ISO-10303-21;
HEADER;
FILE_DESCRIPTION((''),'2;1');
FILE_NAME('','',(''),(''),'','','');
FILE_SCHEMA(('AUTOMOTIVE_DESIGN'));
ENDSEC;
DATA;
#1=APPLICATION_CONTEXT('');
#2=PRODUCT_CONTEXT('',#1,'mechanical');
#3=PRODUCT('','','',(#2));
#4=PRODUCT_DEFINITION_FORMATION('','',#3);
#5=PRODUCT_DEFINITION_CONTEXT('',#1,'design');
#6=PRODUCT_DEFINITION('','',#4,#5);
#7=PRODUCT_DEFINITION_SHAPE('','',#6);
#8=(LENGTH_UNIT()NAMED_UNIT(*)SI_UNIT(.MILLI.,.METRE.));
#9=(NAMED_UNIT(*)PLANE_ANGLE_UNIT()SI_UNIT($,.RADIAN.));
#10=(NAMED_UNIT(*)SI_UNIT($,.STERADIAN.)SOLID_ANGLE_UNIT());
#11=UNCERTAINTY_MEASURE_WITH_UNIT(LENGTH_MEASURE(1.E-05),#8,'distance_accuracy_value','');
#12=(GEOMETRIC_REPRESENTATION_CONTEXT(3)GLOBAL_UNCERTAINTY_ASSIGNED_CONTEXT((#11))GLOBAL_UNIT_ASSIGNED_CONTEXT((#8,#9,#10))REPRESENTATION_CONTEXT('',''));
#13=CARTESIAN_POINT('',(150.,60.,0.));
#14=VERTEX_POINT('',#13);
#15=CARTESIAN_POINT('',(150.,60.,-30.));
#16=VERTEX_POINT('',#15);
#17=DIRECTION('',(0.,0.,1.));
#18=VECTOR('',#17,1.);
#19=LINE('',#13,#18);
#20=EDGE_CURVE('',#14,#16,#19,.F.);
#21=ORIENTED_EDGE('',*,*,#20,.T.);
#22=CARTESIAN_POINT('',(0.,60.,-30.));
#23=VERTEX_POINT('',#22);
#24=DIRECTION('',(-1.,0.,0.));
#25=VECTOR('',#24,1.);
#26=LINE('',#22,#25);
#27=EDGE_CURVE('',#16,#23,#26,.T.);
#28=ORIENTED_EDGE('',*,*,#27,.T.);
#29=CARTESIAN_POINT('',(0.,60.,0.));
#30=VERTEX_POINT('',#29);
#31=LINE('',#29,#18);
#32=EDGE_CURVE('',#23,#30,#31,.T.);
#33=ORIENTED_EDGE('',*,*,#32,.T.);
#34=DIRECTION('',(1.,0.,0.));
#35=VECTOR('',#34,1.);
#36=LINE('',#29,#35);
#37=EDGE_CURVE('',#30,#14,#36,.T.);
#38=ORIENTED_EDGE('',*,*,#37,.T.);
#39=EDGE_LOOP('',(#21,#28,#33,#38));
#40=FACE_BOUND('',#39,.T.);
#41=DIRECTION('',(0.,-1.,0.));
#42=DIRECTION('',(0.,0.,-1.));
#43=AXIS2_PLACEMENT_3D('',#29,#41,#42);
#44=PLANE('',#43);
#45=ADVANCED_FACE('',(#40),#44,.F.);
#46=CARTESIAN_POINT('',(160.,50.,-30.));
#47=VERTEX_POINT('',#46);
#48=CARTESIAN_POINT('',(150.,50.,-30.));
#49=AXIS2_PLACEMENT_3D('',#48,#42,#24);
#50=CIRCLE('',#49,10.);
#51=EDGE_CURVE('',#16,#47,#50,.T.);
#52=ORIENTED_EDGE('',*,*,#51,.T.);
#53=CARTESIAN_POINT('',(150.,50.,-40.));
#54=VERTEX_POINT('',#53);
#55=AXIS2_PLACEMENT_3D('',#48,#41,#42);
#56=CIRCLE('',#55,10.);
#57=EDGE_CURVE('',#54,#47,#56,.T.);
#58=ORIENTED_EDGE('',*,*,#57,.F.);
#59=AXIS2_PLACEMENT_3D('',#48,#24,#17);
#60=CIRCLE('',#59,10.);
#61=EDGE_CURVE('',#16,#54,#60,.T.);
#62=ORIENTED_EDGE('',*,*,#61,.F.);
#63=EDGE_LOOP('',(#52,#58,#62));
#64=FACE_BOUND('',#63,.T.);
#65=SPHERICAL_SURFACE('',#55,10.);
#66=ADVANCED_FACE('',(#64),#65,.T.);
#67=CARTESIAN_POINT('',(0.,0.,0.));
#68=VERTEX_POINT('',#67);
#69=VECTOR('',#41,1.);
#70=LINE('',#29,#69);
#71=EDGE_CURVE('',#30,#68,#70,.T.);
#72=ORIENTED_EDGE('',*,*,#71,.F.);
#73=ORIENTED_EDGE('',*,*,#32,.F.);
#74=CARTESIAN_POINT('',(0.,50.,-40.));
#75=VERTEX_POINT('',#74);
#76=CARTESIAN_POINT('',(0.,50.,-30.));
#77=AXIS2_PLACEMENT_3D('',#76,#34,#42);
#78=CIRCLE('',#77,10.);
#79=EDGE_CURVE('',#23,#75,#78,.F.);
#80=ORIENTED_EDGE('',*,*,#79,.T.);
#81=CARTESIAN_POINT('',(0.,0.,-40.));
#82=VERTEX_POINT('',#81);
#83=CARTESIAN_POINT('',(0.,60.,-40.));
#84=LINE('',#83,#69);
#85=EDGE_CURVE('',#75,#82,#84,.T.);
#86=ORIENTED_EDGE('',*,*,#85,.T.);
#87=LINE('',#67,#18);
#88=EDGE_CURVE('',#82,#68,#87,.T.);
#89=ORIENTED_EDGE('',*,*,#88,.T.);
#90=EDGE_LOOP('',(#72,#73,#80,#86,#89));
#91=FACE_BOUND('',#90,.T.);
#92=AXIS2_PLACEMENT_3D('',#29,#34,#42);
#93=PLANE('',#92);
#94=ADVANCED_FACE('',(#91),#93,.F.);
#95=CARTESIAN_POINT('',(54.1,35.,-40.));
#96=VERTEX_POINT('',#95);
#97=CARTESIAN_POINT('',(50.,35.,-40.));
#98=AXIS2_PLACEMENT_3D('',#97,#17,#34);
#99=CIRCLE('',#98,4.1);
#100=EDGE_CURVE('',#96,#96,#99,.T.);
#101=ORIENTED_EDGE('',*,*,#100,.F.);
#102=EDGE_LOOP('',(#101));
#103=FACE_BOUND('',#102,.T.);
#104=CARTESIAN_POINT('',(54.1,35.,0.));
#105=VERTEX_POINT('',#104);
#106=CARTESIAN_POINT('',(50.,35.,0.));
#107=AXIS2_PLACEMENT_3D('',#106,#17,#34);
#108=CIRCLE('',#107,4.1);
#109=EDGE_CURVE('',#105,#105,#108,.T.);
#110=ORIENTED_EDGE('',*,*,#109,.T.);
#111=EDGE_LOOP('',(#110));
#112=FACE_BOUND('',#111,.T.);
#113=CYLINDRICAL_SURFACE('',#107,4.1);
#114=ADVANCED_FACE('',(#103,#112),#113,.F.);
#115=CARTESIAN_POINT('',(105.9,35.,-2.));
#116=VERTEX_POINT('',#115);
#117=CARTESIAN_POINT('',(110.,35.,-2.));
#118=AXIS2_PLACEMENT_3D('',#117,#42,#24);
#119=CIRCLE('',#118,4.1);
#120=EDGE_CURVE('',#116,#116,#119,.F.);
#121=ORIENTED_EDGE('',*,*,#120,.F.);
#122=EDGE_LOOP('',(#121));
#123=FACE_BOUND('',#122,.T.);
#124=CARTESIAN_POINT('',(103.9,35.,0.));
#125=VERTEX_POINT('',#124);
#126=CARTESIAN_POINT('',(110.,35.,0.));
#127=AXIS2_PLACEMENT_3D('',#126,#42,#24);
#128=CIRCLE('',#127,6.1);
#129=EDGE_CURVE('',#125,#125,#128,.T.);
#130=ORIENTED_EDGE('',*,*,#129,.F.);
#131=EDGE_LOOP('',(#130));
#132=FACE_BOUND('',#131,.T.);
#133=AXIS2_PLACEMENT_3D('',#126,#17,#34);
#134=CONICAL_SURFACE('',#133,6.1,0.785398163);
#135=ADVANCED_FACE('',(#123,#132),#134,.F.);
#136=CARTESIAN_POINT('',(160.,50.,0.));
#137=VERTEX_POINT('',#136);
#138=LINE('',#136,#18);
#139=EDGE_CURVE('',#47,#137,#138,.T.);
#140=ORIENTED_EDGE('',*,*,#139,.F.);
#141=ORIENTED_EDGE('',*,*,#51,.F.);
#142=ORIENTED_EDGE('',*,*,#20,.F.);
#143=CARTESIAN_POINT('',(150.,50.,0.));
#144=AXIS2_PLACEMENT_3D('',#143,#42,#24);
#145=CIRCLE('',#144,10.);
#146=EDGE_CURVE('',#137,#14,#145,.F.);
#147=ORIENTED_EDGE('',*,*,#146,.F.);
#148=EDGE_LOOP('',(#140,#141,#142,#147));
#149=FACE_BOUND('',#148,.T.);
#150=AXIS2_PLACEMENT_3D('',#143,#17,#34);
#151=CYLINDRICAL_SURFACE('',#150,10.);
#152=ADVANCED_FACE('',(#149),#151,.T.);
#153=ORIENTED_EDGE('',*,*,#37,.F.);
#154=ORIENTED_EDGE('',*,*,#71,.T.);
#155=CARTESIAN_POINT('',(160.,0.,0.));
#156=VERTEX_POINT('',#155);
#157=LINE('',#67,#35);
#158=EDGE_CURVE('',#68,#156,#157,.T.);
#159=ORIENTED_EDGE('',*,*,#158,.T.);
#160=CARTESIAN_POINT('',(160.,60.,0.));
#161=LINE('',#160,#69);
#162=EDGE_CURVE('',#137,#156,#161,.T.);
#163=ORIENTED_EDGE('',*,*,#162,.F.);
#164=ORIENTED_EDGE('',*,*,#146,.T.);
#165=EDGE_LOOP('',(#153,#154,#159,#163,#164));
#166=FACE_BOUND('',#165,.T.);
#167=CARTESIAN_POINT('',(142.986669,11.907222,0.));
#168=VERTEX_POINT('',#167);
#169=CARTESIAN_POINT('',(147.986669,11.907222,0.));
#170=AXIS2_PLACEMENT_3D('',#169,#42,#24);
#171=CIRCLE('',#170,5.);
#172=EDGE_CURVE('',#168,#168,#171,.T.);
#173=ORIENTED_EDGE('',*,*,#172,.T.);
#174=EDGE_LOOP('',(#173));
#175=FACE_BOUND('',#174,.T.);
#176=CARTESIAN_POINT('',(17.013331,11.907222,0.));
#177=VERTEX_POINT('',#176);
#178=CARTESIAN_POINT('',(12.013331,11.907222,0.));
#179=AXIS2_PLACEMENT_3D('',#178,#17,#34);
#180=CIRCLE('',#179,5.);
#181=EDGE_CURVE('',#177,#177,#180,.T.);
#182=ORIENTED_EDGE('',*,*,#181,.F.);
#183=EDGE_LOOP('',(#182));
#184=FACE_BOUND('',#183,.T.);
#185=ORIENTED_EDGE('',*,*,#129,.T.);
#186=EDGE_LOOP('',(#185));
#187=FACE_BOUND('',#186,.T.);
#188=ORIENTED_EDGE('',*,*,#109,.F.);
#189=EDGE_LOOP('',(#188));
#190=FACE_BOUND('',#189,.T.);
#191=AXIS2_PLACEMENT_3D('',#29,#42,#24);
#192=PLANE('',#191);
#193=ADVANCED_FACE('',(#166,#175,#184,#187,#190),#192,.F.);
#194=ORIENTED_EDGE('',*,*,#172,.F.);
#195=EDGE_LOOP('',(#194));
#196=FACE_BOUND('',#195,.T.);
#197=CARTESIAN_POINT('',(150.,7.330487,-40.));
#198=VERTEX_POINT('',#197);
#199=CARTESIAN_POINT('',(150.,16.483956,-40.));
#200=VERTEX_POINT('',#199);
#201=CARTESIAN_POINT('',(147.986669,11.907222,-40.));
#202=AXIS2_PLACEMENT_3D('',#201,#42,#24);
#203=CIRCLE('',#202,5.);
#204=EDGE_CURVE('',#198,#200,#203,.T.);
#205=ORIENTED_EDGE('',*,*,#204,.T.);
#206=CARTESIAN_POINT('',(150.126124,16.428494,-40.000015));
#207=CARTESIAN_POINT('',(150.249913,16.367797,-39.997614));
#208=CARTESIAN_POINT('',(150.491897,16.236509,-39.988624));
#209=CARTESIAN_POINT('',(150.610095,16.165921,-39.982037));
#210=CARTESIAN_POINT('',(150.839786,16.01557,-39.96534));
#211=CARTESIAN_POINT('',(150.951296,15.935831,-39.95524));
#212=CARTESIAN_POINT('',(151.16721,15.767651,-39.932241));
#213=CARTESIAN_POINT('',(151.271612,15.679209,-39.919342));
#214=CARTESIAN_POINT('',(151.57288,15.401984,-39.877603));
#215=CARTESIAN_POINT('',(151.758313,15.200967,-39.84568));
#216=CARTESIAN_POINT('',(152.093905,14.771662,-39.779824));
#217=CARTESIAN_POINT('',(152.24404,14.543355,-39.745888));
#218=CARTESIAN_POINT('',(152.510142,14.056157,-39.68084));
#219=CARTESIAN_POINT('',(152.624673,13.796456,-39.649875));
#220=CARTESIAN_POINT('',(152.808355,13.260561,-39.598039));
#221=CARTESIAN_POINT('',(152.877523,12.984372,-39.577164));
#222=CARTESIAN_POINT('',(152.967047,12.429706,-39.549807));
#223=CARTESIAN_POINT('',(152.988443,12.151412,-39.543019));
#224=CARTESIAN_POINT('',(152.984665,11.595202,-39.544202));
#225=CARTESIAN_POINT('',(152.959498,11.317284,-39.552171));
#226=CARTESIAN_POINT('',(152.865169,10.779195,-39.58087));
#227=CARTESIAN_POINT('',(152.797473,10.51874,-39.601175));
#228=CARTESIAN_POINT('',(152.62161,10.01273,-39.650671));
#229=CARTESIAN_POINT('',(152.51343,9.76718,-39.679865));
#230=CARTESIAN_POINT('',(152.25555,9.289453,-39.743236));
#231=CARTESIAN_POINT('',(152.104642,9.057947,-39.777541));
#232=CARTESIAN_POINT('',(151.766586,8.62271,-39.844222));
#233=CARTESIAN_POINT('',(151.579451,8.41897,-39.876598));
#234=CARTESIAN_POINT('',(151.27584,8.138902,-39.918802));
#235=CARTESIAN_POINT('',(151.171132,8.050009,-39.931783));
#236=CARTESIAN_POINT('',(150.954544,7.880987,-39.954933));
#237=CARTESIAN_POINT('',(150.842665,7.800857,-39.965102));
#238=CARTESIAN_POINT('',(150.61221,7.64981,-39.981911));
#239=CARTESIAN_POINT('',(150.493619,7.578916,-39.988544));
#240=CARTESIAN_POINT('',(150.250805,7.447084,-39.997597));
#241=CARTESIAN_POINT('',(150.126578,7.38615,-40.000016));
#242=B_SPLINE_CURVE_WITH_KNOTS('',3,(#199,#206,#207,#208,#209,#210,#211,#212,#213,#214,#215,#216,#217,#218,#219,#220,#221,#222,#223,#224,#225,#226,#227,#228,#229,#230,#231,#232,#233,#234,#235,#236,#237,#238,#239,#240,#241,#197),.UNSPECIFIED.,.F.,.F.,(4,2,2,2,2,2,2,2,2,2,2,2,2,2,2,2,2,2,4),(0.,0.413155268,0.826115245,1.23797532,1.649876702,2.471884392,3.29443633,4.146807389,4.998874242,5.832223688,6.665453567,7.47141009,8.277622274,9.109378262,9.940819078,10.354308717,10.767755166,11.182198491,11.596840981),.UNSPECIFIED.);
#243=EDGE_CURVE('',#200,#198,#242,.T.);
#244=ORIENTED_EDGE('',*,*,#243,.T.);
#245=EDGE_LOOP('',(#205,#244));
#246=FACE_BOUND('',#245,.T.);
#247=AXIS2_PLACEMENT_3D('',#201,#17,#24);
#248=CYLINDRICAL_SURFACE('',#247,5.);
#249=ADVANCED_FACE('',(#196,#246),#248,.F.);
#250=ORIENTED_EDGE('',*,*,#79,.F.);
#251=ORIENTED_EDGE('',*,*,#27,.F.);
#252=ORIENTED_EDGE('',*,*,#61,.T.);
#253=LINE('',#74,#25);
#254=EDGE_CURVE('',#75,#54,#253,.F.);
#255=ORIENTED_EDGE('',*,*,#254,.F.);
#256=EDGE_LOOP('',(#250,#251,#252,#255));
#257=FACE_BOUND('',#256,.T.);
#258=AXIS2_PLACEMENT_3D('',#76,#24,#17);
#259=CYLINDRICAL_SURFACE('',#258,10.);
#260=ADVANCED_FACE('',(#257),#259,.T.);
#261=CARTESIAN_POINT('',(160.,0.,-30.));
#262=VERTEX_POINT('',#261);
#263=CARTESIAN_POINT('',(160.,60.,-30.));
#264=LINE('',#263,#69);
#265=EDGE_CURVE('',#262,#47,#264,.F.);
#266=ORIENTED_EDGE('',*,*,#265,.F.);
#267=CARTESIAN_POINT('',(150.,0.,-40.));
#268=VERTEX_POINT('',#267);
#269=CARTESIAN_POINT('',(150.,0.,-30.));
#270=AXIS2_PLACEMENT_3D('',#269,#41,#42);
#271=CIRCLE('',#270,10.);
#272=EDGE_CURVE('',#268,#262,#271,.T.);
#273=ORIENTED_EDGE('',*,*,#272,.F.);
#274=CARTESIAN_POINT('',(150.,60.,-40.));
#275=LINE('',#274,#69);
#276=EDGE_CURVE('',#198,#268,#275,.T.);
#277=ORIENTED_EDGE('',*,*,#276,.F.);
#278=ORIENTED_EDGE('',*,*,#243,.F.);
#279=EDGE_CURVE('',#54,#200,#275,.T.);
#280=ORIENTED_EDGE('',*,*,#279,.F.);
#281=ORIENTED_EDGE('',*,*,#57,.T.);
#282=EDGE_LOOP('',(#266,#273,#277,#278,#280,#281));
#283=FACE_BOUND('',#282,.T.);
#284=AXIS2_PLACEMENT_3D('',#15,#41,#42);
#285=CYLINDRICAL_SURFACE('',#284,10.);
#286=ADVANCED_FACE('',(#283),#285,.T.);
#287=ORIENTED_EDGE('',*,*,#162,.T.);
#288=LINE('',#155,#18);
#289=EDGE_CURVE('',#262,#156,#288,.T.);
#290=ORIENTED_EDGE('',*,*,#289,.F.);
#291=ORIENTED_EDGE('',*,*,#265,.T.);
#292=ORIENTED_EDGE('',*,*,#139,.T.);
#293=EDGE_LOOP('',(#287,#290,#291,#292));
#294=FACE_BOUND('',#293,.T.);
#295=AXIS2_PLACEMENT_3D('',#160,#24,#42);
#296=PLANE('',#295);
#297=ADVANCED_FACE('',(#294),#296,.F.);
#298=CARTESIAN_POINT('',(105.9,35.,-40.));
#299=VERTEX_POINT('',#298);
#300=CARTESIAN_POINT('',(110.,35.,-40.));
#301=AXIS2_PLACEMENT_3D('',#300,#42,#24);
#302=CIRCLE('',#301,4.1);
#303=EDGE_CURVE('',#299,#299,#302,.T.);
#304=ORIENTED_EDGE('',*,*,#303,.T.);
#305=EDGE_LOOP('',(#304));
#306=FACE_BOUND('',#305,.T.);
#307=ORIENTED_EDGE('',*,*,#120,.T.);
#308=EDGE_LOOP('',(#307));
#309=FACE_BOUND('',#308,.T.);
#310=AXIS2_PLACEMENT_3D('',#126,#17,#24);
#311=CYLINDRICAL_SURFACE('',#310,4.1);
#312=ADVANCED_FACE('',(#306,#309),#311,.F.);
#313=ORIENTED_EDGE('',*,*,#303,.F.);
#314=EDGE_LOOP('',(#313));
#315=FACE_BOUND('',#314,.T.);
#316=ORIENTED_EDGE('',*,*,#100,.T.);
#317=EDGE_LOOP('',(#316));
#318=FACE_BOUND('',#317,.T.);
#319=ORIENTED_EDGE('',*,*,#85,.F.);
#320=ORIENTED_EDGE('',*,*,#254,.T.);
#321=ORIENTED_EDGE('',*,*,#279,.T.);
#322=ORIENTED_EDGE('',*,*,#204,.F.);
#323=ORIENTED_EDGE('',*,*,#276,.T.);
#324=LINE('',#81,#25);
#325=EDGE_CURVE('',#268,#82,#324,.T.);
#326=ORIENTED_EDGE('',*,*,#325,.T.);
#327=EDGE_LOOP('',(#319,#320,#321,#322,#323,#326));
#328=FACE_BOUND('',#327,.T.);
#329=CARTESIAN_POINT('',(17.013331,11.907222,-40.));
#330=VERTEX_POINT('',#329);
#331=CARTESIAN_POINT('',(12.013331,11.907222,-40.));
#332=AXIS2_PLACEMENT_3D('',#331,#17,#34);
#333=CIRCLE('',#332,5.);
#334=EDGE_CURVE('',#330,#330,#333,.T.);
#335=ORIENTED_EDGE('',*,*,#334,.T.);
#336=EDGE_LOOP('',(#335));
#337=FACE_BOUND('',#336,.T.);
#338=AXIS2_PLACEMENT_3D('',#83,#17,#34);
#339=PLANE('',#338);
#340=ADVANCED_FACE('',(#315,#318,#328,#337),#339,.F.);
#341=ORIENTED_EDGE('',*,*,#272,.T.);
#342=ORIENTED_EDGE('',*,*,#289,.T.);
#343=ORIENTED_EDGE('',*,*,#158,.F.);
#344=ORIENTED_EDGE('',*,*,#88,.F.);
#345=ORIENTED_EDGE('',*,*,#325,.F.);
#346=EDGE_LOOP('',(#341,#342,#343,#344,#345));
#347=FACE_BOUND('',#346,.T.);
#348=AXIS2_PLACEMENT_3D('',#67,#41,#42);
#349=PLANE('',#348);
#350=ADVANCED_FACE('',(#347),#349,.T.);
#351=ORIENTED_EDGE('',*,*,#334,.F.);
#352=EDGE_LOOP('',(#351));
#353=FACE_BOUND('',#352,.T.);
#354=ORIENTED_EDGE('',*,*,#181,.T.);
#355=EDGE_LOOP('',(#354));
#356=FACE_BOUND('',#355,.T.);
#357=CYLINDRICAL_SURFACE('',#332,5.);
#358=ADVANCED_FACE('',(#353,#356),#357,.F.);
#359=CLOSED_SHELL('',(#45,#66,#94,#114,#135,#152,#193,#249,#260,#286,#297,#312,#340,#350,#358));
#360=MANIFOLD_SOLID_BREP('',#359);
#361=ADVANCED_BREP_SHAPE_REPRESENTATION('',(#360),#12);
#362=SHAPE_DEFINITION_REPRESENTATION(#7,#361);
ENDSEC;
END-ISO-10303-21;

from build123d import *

# Parameters (mm, degrees)
SKETCH1_W                  = 80
SKETCH1_H                  = 40
CNFBOSS_EXTRUDE1_DEPTH     = 60
SKETCH2_R                  = 5
CNFCUT_DEPTH               = 108.703296143
F_8_2_8_2_DIAMETER_HOLE1_D = 8.2
CNFFILLET_R                = 10
CNFFILLET2_R               = 10
CNFCHAMFER_SIZE            = 2


with BuildPart() as part:
    # Sketch1 → cnfBoss-Extrude1 (new body)
    with BuildSketch(Plane(origin=(0, 0, 0), x_dir=(1, 0, 0), z_dir=(0, 1, 0))):
        with Locations((40, 20)):
            Rectangle(SKETCH1_W, SKETCH1_H)
    extrude(amount=CNFBOSS_EXTRUDE1_DEPTH)

    # Sketch2 → cnfCut (cut, through all)
    with BuildSketch(Plane.XY):
        with Locations((12.01333081, 11.907221875)):
            Circle(SKETCH2_R)
    extrude(amount=-CNFCUT_DEPTH, mode=Mode.SUBTRACT)

    # Ø8.2 (8.2) Diameter Hole1 (through all)
    with Locations(Plane.XY):
        with Locations((50, 35)):
            Hole(F_8_2_8_2_DIAMETER_HOLE1_D / 2)

    # cnfMirror: part across plane


with BuildPart() as part_1:
    add(part.part)
    add(part.part.mirror(Plane(origin=(80, 60, 0), x_dir=(0, 0, 1), z_dir=(-1, 0, 0))))

    # cnfFillet
    # the kernel refuses this fillet: 10 mm, written as the material it takes off along each edge
    with BuildSketch(Plane(origin=(160, -25, -40), x_dir=(-1, 0, 0), z_dir=(0, 1, 0))) as cnffillet_piece_1:
        with BuildLine():
            CenterArc((CNFFILLET_R, CNFFILLET_R), CNFFILLET_R, 180, 90)
            Line((0, CNFFILLET_R), (0, 0))
            Line((0, 0), (CNFFILLET_R, 0))
        make_face()
    extrude(amount=110, mode=Mode.SUBTRACT)

    # cnfFillet2
    cnffillet2_edges = [part_1.edges().sort_by_distance(p)[0] for p in [
        (75, 60, -40),
        (160, 60, -15),
        (157.071067812, 60, -37.071067812),
    ]]
    fillet(cnffillet2_edges, radius=CNFFILLET2_R)

    # cnfChamfer
    cnfchamfer_edges = [part_1.edges().sort_by_distance(p)[0] for p in [
        (105.9, 35, 0),
    ]]
    chamfer(cnfchamfer_edges, length=CNFCHAMFER_SIZE)


solid = part_1.part
